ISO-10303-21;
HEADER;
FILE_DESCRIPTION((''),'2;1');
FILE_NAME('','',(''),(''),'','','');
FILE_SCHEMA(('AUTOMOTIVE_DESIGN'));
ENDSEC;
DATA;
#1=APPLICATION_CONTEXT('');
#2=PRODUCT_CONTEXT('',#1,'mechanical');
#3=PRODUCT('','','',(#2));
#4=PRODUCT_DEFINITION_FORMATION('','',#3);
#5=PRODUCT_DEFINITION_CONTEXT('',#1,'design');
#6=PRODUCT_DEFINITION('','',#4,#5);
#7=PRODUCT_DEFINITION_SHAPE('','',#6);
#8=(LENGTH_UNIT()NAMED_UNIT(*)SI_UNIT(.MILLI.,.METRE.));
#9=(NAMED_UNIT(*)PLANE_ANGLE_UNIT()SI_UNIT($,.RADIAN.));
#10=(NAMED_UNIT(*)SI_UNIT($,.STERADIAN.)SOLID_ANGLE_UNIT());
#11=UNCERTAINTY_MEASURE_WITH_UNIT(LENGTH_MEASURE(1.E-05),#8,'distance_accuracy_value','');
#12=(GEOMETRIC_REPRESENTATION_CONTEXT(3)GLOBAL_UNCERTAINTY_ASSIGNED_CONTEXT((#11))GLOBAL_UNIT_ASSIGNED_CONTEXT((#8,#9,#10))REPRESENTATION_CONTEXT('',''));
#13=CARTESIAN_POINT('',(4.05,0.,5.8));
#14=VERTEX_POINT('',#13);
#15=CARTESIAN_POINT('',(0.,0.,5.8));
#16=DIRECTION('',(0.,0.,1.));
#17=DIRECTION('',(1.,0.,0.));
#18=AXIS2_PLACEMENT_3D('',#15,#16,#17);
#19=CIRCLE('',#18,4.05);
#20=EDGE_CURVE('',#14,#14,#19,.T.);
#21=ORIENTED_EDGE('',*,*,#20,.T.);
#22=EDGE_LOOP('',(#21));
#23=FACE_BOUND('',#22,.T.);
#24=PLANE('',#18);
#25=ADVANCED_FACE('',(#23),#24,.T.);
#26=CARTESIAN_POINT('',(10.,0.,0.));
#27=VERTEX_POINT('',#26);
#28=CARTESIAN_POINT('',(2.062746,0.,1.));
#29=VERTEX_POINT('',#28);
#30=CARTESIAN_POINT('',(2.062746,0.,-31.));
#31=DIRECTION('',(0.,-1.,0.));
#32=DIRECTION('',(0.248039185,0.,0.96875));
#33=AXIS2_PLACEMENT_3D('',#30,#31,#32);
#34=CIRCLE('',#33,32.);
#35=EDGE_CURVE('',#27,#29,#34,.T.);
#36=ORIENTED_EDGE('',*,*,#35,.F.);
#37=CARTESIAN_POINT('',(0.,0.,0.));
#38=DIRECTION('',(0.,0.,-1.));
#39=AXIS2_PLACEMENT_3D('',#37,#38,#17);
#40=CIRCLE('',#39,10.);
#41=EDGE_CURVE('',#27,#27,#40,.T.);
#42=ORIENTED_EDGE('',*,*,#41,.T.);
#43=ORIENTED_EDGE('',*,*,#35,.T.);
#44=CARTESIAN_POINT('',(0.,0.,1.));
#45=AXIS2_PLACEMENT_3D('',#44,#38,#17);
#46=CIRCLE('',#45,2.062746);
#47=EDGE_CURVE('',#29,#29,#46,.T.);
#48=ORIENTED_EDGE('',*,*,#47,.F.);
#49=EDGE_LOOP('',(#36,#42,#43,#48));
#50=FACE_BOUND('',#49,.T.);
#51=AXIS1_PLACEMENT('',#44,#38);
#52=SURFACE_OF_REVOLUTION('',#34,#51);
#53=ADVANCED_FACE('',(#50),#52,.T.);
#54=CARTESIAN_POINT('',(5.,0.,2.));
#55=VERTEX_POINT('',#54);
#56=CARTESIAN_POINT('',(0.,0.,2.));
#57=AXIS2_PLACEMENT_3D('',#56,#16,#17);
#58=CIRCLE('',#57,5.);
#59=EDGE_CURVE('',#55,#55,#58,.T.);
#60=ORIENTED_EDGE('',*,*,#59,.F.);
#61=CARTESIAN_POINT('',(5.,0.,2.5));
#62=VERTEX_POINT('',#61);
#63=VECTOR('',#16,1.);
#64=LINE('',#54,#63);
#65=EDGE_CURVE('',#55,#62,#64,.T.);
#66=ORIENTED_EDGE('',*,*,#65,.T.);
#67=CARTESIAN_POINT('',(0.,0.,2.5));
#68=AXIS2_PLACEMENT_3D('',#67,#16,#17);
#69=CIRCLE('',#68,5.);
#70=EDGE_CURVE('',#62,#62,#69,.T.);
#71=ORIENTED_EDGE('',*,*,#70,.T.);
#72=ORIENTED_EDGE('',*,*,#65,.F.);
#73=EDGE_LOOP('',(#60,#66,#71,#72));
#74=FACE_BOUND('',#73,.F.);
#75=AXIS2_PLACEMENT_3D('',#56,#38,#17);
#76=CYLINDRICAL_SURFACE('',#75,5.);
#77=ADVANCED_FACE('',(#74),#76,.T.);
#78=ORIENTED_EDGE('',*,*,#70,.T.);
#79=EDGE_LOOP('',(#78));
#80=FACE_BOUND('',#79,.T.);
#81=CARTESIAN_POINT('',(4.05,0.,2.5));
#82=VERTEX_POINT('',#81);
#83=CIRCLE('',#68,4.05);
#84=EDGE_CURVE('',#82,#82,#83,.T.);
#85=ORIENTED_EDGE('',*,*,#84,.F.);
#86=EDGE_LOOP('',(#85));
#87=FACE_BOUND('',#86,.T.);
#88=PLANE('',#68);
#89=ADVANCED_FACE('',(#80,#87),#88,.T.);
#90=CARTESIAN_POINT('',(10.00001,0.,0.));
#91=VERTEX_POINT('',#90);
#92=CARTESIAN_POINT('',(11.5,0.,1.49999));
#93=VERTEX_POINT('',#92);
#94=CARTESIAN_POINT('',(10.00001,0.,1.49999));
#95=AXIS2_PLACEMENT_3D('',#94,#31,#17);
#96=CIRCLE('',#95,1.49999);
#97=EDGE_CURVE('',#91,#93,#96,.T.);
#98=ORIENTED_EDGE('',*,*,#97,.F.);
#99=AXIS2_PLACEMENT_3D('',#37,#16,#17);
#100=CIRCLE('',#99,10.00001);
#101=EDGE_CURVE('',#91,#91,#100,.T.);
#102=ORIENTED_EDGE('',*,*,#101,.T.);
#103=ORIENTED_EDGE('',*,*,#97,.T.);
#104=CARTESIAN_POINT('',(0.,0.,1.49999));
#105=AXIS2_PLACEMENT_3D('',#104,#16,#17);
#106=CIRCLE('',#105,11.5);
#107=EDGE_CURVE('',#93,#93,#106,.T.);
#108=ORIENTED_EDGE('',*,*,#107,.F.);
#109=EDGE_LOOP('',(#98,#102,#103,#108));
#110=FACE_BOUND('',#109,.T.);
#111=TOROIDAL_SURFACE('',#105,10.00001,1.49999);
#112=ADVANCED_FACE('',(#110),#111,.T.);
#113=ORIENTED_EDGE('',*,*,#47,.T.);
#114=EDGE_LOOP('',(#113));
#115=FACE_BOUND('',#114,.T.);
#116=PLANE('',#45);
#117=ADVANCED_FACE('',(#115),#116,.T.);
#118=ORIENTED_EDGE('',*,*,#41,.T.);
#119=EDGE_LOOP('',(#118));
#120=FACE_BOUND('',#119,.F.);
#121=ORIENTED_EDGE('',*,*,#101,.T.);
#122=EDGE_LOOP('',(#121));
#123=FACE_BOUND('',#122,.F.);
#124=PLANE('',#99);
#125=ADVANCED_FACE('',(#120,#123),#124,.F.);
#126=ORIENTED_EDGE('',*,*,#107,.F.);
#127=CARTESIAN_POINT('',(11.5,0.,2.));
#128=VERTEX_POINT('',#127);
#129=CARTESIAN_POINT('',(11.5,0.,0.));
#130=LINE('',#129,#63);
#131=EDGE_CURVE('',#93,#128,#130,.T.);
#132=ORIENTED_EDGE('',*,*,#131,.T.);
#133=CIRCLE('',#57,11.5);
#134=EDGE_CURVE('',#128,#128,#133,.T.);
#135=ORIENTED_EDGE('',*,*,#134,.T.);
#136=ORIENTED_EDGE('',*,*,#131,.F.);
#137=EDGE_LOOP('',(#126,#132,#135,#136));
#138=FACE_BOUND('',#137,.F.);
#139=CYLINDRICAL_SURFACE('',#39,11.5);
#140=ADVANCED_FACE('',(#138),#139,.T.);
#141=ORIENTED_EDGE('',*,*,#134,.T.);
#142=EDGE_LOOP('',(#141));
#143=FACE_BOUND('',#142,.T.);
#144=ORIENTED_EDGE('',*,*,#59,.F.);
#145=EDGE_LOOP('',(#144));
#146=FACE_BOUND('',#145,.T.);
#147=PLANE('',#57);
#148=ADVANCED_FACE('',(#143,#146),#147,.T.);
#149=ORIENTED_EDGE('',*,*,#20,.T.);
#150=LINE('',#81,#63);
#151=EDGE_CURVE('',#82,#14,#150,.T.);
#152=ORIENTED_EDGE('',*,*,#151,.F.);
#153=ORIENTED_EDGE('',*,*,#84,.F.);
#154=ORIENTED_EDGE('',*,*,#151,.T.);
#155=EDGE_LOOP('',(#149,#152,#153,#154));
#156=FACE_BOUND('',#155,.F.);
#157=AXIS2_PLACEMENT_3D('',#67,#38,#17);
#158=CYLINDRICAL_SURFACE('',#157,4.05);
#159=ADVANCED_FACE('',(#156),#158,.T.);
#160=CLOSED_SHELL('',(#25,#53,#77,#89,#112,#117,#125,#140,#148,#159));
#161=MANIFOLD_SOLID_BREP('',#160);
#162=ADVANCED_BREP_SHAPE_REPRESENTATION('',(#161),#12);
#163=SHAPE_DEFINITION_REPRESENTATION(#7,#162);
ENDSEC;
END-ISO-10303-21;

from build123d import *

# Parameters (mm, degrees)
F0_R     = 11.5
F1_DEPTH = 2
F2_R     = 5
F3_DEPTH = 0.5
F4_R     = 4.05
F5_DEPTH = 3.3
F6_R     = 10
F7_DEPTH = 1
F9_R     = 1.49999


# Not quite as in the source:
# - a fillet or chamfer that OpenCascade refuses, or shapes differently, is made with other operations: its cross-section is extruded or revolved along the edge and cut away or added
# - a fillet or chamfer is up to 0.001 mm smaller than in the source, because OpenCascade refuses the exact size


with BuildPart() as f1:
    # F0 (on Top) → F1 (new body)
    with BuildSketch(Plane.XY):
        Circle(F0_R)
    extrude(amount=F1_DEPTH)

    # F2 (on face) → F3 (join)
    with BuildSketch(Plane.XY.offset(2)):
        Circle(F2_R)
    extrude(amount=F3_DEPTH)

    # F4 (on face) → F5 (join)
    with BuildSketch(Plane.XY.offset(2.5)):
        Circle(F4_R)
    extrude(amount=F5_DEPTH)

    # F6 (on face) → F7 (cut)
    with BuildSketch(Plane(origin=(0, 0, 0), x_dir=(1, 0, 0), z_dir=(0, 0, -1))):
        Circle(F6_R)
    extrude(amount=-F7_DEPTH, mode=Mode.SUBTRACT)

    # F8: fillet of radius 32 on 1 edges, made by hand

    # F8_s1 → F8_t2 (revolve)
    with BuildSketch(Plane.XZ):
        with BuildLine():
            ThreePointArc((10, 0), (6.0627460668, 0.7490157328), (2.0627460668, 1))
            Line((2.0627460668, 1), (10, 1))
            Line((10, 1), (10, 0))
        make_face()
    revolve(axis=Axis((0, 0, 1), (0, 0, -1)))

    # F9 (radius 1.5 in the source; OpenCascade refuses exactly that, so slightly less here)
    f9_edges = [f1.edges().sort_by_distance(p)[0] for p in [
        (-11.5, 0, 0),
    ]]
    fillet(f9_edges, radius=F9_R)


solid = f1.part
